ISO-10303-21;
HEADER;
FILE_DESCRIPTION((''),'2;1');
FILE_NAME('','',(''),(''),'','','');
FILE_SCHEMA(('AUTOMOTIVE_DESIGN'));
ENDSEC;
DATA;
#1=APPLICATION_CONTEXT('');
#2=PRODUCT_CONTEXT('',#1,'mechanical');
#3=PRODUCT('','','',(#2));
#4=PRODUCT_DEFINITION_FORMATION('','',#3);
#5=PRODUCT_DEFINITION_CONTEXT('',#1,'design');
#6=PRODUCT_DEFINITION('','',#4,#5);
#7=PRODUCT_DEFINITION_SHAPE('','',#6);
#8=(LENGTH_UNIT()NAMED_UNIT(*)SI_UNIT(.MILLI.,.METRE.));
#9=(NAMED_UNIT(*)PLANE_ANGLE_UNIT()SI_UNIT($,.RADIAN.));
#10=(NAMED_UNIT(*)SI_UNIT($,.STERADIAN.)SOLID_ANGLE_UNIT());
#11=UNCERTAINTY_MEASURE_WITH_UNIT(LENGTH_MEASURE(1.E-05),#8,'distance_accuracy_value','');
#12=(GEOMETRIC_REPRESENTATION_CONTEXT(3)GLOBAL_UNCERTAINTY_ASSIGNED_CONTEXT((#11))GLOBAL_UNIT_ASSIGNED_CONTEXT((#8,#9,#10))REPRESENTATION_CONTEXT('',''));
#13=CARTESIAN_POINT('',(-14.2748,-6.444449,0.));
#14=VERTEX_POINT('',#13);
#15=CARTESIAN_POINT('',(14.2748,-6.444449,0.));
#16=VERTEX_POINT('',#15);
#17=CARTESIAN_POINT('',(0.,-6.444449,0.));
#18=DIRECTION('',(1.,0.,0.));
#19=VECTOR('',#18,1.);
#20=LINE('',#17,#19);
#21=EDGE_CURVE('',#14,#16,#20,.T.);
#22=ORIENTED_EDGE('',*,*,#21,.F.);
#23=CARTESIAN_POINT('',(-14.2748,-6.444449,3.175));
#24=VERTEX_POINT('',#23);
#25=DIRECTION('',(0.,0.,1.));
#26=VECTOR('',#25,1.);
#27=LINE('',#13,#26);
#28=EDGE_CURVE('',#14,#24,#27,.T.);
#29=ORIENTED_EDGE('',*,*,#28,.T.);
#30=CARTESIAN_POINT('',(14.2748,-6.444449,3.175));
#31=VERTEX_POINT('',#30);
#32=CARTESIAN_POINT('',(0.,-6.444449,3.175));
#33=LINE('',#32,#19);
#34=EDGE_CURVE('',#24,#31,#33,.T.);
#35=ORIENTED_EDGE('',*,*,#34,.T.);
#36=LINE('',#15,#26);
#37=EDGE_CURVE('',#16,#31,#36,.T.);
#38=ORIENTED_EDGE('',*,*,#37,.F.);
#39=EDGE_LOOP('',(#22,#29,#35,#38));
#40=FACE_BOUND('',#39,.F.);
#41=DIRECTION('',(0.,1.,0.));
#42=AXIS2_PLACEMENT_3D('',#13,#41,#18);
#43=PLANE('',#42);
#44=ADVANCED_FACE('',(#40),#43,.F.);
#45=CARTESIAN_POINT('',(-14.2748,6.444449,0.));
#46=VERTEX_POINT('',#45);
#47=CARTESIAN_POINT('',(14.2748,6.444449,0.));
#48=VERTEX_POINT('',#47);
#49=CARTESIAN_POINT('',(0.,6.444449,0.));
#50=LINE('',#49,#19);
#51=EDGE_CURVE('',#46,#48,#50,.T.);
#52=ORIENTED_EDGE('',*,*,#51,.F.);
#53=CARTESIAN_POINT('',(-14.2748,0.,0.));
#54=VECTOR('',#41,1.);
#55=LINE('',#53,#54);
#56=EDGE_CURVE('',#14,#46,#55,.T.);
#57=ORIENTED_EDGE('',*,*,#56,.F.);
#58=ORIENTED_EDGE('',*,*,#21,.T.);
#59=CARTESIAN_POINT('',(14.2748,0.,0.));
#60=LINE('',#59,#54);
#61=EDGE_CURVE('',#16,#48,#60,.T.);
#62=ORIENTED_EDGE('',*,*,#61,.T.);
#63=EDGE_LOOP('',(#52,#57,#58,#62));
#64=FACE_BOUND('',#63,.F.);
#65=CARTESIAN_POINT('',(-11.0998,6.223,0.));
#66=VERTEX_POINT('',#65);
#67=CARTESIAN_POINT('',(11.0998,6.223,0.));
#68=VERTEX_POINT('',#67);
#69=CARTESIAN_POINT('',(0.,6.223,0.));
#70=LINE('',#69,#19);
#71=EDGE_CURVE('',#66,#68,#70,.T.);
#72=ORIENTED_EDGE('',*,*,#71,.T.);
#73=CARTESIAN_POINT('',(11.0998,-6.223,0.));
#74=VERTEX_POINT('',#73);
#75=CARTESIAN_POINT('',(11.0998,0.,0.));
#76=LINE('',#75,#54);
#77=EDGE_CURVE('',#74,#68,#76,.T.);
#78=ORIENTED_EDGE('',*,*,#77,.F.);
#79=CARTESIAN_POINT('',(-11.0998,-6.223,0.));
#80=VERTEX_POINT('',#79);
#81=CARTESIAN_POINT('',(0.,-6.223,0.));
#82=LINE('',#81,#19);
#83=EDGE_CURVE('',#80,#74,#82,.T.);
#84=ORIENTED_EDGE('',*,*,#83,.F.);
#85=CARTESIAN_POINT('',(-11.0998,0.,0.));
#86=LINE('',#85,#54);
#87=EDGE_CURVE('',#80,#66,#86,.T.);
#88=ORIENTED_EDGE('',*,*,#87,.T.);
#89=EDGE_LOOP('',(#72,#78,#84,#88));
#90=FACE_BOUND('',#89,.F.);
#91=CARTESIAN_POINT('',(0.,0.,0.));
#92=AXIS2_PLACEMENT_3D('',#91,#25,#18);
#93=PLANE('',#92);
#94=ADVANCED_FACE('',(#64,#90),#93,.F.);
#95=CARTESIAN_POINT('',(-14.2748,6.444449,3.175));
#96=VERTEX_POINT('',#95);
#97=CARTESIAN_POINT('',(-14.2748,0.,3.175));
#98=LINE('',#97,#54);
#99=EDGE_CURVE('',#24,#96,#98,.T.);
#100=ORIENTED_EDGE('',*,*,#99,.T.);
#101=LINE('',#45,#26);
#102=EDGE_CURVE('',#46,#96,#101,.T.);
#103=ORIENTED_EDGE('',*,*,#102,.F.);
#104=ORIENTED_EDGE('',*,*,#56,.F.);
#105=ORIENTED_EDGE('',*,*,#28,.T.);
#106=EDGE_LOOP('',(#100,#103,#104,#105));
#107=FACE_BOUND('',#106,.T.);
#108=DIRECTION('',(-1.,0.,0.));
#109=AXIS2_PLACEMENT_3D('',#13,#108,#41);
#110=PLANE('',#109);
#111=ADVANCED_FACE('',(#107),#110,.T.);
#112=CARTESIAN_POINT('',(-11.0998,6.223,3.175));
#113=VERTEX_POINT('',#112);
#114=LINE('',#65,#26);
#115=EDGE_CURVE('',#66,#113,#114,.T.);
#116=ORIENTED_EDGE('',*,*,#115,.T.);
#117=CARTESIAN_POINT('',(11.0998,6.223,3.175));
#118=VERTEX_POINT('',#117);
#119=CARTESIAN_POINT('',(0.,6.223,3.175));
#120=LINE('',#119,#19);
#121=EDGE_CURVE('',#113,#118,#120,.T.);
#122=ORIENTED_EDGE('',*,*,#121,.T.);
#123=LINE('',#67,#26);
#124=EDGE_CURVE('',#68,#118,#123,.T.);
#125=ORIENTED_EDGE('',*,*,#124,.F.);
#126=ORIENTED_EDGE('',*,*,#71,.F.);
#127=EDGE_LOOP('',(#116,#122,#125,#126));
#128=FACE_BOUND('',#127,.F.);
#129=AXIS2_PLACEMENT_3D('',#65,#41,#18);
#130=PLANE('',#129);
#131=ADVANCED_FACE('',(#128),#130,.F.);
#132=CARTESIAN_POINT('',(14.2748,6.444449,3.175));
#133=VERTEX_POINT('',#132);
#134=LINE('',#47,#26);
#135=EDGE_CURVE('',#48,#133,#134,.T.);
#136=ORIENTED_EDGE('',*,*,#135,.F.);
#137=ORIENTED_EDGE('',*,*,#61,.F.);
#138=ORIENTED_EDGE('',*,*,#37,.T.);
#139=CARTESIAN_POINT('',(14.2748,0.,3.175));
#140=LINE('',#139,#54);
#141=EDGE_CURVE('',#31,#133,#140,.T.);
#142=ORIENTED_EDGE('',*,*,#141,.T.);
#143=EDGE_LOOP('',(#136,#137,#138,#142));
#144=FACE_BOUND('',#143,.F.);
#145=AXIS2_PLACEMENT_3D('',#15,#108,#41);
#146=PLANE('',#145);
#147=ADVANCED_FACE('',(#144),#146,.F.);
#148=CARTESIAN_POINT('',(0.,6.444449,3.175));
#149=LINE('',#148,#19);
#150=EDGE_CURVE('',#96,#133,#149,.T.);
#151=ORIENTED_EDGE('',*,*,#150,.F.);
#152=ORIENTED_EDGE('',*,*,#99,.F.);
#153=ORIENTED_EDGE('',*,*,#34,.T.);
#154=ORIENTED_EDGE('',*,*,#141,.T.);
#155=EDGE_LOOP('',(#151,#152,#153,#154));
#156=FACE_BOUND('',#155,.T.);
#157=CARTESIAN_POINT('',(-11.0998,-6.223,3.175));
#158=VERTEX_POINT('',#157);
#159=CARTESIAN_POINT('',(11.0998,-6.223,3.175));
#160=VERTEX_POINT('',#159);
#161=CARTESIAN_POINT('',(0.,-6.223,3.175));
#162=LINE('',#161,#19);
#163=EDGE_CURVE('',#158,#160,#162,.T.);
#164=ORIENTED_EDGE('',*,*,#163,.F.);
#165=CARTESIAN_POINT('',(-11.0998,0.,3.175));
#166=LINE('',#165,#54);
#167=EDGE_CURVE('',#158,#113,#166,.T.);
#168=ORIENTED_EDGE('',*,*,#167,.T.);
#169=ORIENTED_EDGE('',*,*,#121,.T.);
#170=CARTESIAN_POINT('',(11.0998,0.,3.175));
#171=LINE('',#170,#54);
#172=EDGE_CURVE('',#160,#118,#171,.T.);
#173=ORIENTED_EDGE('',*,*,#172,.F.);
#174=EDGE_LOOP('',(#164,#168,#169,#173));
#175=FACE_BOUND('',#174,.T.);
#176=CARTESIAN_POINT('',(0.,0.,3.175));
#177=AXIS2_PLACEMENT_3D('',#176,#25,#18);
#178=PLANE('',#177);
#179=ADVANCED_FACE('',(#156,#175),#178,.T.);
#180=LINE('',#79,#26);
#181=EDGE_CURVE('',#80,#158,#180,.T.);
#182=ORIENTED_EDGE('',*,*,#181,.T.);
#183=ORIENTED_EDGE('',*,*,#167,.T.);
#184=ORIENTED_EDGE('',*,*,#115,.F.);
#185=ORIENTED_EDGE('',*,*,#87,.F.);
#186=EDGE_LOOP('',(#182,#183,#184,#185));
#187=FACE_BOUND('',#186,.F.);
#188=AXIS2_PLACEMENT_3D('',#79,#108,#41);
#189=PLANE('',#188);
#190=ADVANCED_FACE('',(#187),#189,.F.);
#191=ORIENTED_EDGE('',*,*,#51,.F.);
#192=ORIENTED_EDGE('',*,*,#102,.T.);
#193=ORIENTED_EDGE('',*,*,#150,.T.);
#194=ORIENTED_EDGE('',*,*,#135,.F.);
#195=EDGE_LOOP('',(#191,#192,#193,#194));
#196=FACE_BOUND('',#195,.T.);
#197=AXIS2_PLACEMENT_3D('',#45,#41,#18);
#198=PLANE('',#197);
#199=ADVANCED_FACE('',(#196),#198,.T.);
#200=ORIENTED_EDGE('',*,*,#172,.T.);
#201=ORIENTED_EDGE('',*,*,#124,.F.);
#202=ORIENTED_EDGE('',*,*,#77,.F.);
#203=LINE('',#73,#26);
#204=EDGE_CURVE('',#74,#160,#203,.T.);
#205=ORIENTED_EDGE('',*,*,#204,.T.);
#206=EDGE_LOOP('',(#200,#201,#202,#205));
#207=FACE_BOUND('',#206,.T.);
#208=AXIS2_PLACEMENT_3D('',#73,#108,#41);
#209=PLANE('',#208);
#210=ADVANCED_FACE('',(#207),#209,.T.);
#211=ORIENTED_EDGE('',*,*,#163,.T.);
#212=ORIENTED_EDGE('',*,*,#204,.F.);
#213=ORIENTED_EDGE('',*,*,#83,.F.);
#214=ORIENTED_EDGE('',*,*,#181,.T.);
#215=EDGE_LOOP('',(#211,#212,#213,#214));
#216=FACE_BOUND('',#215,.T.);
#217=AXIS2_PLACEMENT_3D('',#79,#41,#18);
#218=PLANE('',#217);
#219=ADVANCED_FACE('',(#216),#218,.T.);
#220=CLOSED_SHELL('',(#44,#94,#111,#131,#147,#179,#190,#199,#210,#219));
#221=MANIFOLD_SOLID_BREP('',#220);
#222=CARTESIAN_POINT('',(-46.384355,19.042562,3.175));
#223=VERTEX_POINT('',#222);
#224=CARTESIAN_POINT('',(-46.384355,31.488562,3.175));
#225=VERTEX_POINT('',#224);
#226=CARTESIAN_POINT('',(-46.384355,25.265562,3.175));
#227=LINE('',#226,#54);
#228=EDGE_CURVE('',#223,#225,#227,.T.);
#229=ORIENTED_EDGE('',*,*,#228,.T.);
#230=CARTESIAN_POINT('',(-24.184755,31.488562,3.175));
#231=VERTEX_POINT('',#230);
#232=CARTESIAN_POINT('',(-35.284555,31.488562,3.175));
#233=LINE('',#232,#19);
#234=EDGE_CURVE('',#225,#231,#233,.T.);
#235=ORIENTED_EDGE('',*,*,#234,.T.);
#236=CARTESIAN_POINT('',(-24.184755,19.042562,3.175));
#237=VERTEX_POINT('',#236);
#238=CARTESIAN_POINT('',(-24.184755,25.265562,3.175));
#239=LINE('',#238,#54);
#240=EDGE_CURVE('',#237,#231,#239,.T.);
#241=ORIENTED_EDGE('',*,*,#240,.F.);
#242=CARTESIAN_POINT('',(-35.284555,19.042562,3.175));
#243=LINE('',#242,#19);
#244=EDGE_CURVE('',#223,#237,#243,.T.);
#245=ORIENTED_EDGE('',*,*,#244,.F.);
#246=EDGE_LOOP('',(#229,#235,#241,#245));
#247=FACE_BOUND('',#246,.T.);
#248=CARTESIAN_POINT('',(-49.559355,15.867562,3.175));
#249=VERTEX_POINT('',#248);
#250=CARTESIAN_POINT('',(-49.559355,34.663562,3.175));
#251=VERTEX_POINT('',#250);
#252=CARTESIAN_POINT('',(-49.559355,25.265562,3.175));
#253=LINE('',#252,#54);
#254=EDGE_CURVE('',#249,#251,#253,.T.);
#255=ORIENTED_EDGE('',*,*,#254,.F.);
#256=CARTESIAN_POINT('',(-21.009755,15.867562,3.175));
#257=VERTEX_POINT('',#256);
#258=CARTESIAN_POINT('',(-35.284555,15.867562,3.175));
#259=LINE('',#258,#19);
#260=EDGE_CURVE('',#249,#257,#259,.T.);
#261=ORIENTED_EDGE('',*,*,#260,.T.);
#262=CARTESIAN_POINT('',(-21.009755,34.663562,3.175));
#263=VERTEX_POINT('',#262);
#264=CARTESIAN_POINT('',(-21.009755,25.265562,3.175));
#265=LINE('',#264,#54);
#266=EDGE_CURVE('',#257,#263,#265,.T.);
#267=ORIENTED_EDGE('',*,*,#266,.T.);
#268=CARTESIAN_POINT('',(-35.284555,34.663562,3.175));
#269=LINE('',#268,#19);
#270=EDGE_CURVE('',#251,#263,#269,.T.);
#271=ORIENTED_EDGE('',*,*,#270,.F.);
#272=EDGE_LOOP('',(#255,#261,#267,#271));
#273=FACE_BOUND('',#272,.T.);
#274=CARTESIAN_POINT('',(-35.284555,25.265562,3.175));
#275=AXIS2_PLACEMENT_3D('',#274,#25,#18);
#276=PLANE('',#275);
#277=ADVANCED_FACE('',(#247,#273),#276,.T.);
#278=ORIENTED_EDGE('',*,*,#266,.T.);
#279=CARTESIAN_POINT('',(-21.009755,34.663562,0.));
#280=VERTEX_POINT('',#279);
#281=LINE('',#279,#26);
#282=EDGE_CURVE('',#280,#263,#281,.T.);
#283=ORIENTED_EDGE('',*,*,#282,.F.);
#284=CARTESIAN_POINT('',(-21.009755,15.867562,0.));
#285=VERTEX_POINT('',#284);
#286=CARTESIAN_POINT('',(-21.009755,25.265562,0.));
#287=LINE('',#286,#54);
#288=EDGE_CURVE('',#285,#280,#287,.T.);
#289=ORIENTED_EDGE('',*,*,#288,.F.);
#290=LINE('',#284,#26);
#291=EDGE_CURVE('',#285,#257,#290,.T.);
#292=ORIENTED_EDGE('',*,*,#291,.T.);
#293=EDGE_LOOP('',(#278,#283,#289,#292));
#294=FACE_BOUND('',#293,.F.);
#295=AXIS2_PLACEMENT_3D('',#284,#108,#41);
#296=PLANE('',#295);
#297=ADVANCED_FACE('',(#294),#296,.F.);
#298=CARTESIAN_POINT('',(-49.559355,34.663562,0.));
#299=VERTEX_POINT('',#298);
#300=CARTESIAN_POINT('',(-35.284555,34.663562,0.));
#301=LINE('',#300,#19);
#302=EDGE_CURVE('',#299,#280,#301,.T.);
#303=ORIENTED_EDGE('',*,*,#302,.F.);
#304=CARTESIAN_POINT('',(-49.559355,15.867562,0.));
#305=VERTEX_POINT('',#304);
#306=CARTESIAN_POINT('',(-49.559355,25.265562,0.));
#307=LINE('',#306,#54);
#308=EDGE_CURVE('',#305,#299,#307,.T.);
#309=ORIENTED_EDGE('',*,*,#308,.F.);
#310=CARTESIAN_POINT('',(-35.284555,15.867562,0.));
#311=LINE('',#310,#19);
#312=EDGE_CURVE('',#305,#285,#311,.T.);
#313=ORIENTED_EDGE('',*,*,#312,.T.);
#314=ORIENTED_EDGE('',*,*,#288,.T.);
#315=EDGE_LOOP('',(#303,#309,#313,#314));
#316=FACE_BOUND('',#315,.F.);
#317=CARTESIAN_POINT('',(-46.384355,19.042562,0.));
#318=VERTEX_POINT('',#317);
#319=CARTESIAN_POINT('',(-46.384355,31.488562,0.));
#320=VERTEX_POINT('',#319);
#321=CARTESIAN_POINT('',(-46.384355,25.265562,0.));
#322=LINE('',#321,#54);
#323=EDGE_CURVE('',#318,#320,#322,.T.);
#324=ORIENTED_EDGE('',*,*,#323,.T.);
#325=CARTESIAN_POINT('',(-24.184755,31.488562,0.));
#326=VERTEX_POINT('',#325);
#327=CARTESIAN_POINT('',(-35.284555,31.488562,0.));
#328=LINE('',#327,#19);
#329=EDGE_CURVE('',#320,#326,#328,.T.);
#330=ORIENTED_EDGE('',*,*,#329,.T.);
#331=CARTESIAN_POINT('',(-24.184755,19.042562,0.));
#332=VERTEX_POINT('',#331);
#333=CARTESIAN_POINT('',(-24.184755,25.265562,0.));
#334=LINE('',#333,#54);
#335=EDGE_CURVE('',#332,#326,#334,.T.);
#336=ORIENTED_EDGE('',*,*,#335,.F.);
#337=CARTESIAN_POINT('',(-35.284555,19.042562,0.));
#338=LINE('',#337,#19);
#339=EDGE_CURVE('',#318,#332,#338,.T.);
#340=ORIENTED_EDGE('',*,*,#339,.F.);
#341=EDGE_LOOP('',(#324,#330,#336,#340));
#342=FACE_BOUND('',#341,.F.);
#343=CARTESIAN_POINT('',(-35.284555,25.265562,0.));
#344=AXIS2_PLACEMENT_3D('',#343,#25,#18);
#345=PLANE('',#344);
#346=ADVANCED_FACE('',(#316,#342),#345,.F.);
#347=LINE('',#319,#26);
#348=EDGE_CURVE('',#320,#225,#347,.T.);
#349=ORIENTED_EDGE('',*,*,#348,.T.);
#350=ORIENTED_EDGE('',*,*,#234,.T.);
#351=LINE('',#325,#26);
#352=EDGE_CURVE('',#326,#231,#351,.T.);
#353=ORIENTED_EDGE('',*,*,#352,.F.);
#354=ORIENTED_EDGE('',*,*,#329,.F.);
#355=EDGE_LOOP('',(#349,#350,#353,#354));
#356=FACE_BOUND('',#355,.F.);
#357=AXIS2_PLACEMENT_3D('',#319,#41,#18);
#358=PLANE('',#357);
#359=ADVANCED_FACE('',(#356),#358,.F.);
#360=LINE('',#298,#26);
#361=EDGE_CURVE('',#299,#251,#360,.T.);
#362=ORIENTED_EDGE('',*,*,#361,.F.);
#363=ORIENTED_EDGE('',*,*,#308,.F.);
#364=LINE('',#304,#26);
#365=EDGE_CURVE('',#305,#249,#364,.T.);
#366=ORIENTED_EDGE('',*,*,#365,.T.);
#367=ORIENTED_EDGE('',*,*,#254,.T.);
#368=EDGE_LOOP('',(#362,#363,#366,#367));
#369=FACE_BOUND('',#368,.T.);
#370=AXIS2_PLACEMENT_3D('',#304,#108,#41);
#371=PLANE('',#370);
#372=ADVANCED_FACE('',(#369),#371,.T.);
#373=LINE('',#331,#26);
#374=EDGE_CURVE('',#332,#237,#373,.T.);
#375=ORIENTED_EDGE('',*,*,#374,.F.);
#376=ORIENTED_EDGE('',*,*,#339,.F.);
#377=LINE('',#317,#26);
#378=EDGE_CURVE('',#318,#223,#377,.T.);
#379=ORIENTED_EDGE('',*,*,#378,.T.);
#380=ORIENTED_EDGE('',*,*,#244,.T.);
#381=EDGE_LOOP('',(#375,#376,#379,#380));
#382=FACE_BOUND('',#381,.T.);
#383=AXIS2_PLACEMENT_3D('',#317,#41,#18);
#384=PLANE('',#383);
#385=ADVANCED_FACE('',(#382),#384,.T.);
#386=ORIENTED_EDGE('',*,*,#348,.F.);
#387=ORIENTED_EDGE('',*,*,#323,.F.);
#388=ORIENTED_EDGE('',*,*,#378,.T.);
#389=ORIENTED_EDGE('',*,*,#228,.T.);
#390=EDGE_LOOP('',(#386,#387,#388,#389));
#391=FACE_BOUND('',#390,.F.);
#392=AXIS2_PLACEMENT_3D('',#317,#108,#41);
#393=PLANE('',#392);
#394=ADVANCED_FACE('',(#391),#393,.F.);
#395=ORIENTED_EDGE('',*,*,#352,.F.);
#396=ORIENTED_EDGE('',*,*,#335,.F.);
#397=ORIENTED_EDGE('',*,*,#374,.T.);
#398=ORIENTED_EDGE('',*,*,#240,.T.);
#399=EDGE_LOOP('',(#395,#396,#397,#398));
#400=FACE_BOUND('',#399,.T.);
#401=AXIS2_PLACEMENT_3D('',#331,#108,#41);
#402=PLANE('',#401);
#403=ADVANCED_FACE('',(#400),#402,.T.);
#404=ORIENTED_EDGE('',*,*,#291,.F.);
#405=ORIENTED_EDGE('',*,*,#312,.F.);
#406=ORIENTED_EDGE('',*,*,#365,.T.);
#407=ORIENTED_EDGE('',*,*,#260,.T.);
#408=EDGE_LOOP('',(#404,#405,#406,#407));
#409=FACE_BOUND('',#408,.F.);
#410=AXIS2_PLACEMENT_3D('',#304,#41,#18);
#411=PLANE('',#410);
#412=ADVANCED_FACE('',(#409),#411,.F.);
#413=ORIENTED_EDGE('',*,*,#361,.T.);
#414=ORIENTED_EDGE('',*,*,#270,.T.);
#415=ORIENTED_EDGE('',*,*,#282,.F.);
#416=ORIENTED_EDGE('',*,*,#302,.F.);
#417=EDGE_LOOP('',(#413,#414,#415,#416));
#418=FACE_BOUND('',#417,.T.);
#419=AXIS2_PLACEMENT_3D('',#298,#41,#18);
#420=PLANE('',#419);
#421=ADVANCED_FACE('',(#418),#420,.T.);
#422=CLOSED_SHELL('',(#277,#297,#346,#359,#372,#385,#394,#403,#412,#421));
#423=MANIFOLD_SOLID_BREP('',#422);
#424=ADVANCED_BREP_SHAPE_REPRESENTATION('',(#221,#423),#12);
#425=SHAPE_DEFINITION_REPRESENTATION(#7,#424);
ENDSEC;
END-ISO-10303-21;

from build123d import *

# Parameters (mm, degrees)
F0_W     = 28.5496
F0_H     = 12.8888987312
F0_W_2   = 22.1996
F0_H_2   = 12.446
F1_DEPTH = 3.175
F0_H_3   = 18.796
F2_DEPTH = 3.175


with BuildPart() as f1:
    # F0 (on Top) → F1 (new body)
    with BuildSketch(Plane.XY):
        Rectangle(F0_W, F0_H)
        Rectangle(F0_W_2, F0_H_2, mode=Mode.SUBTRACT)
    extrude(amount=F1_DEPTH)


with BuildPart() as f2:
    # F0 (on Top) → F2 (new body)
    with BuildSketch(Plane.XY):
        with Locations((-35.2845547821, 25.2655620637)):
            Rectangle(F0_W, F0_H_3)
        with Locations((-35.2845547821, 25.2655620637)):
            Rectangle(F0_W_2, F0_H_2, mode=Mode.SUBTRACT)
    extrude(amount=F2_DEPTH)


solid = Compound([f1.part, f2.part])
